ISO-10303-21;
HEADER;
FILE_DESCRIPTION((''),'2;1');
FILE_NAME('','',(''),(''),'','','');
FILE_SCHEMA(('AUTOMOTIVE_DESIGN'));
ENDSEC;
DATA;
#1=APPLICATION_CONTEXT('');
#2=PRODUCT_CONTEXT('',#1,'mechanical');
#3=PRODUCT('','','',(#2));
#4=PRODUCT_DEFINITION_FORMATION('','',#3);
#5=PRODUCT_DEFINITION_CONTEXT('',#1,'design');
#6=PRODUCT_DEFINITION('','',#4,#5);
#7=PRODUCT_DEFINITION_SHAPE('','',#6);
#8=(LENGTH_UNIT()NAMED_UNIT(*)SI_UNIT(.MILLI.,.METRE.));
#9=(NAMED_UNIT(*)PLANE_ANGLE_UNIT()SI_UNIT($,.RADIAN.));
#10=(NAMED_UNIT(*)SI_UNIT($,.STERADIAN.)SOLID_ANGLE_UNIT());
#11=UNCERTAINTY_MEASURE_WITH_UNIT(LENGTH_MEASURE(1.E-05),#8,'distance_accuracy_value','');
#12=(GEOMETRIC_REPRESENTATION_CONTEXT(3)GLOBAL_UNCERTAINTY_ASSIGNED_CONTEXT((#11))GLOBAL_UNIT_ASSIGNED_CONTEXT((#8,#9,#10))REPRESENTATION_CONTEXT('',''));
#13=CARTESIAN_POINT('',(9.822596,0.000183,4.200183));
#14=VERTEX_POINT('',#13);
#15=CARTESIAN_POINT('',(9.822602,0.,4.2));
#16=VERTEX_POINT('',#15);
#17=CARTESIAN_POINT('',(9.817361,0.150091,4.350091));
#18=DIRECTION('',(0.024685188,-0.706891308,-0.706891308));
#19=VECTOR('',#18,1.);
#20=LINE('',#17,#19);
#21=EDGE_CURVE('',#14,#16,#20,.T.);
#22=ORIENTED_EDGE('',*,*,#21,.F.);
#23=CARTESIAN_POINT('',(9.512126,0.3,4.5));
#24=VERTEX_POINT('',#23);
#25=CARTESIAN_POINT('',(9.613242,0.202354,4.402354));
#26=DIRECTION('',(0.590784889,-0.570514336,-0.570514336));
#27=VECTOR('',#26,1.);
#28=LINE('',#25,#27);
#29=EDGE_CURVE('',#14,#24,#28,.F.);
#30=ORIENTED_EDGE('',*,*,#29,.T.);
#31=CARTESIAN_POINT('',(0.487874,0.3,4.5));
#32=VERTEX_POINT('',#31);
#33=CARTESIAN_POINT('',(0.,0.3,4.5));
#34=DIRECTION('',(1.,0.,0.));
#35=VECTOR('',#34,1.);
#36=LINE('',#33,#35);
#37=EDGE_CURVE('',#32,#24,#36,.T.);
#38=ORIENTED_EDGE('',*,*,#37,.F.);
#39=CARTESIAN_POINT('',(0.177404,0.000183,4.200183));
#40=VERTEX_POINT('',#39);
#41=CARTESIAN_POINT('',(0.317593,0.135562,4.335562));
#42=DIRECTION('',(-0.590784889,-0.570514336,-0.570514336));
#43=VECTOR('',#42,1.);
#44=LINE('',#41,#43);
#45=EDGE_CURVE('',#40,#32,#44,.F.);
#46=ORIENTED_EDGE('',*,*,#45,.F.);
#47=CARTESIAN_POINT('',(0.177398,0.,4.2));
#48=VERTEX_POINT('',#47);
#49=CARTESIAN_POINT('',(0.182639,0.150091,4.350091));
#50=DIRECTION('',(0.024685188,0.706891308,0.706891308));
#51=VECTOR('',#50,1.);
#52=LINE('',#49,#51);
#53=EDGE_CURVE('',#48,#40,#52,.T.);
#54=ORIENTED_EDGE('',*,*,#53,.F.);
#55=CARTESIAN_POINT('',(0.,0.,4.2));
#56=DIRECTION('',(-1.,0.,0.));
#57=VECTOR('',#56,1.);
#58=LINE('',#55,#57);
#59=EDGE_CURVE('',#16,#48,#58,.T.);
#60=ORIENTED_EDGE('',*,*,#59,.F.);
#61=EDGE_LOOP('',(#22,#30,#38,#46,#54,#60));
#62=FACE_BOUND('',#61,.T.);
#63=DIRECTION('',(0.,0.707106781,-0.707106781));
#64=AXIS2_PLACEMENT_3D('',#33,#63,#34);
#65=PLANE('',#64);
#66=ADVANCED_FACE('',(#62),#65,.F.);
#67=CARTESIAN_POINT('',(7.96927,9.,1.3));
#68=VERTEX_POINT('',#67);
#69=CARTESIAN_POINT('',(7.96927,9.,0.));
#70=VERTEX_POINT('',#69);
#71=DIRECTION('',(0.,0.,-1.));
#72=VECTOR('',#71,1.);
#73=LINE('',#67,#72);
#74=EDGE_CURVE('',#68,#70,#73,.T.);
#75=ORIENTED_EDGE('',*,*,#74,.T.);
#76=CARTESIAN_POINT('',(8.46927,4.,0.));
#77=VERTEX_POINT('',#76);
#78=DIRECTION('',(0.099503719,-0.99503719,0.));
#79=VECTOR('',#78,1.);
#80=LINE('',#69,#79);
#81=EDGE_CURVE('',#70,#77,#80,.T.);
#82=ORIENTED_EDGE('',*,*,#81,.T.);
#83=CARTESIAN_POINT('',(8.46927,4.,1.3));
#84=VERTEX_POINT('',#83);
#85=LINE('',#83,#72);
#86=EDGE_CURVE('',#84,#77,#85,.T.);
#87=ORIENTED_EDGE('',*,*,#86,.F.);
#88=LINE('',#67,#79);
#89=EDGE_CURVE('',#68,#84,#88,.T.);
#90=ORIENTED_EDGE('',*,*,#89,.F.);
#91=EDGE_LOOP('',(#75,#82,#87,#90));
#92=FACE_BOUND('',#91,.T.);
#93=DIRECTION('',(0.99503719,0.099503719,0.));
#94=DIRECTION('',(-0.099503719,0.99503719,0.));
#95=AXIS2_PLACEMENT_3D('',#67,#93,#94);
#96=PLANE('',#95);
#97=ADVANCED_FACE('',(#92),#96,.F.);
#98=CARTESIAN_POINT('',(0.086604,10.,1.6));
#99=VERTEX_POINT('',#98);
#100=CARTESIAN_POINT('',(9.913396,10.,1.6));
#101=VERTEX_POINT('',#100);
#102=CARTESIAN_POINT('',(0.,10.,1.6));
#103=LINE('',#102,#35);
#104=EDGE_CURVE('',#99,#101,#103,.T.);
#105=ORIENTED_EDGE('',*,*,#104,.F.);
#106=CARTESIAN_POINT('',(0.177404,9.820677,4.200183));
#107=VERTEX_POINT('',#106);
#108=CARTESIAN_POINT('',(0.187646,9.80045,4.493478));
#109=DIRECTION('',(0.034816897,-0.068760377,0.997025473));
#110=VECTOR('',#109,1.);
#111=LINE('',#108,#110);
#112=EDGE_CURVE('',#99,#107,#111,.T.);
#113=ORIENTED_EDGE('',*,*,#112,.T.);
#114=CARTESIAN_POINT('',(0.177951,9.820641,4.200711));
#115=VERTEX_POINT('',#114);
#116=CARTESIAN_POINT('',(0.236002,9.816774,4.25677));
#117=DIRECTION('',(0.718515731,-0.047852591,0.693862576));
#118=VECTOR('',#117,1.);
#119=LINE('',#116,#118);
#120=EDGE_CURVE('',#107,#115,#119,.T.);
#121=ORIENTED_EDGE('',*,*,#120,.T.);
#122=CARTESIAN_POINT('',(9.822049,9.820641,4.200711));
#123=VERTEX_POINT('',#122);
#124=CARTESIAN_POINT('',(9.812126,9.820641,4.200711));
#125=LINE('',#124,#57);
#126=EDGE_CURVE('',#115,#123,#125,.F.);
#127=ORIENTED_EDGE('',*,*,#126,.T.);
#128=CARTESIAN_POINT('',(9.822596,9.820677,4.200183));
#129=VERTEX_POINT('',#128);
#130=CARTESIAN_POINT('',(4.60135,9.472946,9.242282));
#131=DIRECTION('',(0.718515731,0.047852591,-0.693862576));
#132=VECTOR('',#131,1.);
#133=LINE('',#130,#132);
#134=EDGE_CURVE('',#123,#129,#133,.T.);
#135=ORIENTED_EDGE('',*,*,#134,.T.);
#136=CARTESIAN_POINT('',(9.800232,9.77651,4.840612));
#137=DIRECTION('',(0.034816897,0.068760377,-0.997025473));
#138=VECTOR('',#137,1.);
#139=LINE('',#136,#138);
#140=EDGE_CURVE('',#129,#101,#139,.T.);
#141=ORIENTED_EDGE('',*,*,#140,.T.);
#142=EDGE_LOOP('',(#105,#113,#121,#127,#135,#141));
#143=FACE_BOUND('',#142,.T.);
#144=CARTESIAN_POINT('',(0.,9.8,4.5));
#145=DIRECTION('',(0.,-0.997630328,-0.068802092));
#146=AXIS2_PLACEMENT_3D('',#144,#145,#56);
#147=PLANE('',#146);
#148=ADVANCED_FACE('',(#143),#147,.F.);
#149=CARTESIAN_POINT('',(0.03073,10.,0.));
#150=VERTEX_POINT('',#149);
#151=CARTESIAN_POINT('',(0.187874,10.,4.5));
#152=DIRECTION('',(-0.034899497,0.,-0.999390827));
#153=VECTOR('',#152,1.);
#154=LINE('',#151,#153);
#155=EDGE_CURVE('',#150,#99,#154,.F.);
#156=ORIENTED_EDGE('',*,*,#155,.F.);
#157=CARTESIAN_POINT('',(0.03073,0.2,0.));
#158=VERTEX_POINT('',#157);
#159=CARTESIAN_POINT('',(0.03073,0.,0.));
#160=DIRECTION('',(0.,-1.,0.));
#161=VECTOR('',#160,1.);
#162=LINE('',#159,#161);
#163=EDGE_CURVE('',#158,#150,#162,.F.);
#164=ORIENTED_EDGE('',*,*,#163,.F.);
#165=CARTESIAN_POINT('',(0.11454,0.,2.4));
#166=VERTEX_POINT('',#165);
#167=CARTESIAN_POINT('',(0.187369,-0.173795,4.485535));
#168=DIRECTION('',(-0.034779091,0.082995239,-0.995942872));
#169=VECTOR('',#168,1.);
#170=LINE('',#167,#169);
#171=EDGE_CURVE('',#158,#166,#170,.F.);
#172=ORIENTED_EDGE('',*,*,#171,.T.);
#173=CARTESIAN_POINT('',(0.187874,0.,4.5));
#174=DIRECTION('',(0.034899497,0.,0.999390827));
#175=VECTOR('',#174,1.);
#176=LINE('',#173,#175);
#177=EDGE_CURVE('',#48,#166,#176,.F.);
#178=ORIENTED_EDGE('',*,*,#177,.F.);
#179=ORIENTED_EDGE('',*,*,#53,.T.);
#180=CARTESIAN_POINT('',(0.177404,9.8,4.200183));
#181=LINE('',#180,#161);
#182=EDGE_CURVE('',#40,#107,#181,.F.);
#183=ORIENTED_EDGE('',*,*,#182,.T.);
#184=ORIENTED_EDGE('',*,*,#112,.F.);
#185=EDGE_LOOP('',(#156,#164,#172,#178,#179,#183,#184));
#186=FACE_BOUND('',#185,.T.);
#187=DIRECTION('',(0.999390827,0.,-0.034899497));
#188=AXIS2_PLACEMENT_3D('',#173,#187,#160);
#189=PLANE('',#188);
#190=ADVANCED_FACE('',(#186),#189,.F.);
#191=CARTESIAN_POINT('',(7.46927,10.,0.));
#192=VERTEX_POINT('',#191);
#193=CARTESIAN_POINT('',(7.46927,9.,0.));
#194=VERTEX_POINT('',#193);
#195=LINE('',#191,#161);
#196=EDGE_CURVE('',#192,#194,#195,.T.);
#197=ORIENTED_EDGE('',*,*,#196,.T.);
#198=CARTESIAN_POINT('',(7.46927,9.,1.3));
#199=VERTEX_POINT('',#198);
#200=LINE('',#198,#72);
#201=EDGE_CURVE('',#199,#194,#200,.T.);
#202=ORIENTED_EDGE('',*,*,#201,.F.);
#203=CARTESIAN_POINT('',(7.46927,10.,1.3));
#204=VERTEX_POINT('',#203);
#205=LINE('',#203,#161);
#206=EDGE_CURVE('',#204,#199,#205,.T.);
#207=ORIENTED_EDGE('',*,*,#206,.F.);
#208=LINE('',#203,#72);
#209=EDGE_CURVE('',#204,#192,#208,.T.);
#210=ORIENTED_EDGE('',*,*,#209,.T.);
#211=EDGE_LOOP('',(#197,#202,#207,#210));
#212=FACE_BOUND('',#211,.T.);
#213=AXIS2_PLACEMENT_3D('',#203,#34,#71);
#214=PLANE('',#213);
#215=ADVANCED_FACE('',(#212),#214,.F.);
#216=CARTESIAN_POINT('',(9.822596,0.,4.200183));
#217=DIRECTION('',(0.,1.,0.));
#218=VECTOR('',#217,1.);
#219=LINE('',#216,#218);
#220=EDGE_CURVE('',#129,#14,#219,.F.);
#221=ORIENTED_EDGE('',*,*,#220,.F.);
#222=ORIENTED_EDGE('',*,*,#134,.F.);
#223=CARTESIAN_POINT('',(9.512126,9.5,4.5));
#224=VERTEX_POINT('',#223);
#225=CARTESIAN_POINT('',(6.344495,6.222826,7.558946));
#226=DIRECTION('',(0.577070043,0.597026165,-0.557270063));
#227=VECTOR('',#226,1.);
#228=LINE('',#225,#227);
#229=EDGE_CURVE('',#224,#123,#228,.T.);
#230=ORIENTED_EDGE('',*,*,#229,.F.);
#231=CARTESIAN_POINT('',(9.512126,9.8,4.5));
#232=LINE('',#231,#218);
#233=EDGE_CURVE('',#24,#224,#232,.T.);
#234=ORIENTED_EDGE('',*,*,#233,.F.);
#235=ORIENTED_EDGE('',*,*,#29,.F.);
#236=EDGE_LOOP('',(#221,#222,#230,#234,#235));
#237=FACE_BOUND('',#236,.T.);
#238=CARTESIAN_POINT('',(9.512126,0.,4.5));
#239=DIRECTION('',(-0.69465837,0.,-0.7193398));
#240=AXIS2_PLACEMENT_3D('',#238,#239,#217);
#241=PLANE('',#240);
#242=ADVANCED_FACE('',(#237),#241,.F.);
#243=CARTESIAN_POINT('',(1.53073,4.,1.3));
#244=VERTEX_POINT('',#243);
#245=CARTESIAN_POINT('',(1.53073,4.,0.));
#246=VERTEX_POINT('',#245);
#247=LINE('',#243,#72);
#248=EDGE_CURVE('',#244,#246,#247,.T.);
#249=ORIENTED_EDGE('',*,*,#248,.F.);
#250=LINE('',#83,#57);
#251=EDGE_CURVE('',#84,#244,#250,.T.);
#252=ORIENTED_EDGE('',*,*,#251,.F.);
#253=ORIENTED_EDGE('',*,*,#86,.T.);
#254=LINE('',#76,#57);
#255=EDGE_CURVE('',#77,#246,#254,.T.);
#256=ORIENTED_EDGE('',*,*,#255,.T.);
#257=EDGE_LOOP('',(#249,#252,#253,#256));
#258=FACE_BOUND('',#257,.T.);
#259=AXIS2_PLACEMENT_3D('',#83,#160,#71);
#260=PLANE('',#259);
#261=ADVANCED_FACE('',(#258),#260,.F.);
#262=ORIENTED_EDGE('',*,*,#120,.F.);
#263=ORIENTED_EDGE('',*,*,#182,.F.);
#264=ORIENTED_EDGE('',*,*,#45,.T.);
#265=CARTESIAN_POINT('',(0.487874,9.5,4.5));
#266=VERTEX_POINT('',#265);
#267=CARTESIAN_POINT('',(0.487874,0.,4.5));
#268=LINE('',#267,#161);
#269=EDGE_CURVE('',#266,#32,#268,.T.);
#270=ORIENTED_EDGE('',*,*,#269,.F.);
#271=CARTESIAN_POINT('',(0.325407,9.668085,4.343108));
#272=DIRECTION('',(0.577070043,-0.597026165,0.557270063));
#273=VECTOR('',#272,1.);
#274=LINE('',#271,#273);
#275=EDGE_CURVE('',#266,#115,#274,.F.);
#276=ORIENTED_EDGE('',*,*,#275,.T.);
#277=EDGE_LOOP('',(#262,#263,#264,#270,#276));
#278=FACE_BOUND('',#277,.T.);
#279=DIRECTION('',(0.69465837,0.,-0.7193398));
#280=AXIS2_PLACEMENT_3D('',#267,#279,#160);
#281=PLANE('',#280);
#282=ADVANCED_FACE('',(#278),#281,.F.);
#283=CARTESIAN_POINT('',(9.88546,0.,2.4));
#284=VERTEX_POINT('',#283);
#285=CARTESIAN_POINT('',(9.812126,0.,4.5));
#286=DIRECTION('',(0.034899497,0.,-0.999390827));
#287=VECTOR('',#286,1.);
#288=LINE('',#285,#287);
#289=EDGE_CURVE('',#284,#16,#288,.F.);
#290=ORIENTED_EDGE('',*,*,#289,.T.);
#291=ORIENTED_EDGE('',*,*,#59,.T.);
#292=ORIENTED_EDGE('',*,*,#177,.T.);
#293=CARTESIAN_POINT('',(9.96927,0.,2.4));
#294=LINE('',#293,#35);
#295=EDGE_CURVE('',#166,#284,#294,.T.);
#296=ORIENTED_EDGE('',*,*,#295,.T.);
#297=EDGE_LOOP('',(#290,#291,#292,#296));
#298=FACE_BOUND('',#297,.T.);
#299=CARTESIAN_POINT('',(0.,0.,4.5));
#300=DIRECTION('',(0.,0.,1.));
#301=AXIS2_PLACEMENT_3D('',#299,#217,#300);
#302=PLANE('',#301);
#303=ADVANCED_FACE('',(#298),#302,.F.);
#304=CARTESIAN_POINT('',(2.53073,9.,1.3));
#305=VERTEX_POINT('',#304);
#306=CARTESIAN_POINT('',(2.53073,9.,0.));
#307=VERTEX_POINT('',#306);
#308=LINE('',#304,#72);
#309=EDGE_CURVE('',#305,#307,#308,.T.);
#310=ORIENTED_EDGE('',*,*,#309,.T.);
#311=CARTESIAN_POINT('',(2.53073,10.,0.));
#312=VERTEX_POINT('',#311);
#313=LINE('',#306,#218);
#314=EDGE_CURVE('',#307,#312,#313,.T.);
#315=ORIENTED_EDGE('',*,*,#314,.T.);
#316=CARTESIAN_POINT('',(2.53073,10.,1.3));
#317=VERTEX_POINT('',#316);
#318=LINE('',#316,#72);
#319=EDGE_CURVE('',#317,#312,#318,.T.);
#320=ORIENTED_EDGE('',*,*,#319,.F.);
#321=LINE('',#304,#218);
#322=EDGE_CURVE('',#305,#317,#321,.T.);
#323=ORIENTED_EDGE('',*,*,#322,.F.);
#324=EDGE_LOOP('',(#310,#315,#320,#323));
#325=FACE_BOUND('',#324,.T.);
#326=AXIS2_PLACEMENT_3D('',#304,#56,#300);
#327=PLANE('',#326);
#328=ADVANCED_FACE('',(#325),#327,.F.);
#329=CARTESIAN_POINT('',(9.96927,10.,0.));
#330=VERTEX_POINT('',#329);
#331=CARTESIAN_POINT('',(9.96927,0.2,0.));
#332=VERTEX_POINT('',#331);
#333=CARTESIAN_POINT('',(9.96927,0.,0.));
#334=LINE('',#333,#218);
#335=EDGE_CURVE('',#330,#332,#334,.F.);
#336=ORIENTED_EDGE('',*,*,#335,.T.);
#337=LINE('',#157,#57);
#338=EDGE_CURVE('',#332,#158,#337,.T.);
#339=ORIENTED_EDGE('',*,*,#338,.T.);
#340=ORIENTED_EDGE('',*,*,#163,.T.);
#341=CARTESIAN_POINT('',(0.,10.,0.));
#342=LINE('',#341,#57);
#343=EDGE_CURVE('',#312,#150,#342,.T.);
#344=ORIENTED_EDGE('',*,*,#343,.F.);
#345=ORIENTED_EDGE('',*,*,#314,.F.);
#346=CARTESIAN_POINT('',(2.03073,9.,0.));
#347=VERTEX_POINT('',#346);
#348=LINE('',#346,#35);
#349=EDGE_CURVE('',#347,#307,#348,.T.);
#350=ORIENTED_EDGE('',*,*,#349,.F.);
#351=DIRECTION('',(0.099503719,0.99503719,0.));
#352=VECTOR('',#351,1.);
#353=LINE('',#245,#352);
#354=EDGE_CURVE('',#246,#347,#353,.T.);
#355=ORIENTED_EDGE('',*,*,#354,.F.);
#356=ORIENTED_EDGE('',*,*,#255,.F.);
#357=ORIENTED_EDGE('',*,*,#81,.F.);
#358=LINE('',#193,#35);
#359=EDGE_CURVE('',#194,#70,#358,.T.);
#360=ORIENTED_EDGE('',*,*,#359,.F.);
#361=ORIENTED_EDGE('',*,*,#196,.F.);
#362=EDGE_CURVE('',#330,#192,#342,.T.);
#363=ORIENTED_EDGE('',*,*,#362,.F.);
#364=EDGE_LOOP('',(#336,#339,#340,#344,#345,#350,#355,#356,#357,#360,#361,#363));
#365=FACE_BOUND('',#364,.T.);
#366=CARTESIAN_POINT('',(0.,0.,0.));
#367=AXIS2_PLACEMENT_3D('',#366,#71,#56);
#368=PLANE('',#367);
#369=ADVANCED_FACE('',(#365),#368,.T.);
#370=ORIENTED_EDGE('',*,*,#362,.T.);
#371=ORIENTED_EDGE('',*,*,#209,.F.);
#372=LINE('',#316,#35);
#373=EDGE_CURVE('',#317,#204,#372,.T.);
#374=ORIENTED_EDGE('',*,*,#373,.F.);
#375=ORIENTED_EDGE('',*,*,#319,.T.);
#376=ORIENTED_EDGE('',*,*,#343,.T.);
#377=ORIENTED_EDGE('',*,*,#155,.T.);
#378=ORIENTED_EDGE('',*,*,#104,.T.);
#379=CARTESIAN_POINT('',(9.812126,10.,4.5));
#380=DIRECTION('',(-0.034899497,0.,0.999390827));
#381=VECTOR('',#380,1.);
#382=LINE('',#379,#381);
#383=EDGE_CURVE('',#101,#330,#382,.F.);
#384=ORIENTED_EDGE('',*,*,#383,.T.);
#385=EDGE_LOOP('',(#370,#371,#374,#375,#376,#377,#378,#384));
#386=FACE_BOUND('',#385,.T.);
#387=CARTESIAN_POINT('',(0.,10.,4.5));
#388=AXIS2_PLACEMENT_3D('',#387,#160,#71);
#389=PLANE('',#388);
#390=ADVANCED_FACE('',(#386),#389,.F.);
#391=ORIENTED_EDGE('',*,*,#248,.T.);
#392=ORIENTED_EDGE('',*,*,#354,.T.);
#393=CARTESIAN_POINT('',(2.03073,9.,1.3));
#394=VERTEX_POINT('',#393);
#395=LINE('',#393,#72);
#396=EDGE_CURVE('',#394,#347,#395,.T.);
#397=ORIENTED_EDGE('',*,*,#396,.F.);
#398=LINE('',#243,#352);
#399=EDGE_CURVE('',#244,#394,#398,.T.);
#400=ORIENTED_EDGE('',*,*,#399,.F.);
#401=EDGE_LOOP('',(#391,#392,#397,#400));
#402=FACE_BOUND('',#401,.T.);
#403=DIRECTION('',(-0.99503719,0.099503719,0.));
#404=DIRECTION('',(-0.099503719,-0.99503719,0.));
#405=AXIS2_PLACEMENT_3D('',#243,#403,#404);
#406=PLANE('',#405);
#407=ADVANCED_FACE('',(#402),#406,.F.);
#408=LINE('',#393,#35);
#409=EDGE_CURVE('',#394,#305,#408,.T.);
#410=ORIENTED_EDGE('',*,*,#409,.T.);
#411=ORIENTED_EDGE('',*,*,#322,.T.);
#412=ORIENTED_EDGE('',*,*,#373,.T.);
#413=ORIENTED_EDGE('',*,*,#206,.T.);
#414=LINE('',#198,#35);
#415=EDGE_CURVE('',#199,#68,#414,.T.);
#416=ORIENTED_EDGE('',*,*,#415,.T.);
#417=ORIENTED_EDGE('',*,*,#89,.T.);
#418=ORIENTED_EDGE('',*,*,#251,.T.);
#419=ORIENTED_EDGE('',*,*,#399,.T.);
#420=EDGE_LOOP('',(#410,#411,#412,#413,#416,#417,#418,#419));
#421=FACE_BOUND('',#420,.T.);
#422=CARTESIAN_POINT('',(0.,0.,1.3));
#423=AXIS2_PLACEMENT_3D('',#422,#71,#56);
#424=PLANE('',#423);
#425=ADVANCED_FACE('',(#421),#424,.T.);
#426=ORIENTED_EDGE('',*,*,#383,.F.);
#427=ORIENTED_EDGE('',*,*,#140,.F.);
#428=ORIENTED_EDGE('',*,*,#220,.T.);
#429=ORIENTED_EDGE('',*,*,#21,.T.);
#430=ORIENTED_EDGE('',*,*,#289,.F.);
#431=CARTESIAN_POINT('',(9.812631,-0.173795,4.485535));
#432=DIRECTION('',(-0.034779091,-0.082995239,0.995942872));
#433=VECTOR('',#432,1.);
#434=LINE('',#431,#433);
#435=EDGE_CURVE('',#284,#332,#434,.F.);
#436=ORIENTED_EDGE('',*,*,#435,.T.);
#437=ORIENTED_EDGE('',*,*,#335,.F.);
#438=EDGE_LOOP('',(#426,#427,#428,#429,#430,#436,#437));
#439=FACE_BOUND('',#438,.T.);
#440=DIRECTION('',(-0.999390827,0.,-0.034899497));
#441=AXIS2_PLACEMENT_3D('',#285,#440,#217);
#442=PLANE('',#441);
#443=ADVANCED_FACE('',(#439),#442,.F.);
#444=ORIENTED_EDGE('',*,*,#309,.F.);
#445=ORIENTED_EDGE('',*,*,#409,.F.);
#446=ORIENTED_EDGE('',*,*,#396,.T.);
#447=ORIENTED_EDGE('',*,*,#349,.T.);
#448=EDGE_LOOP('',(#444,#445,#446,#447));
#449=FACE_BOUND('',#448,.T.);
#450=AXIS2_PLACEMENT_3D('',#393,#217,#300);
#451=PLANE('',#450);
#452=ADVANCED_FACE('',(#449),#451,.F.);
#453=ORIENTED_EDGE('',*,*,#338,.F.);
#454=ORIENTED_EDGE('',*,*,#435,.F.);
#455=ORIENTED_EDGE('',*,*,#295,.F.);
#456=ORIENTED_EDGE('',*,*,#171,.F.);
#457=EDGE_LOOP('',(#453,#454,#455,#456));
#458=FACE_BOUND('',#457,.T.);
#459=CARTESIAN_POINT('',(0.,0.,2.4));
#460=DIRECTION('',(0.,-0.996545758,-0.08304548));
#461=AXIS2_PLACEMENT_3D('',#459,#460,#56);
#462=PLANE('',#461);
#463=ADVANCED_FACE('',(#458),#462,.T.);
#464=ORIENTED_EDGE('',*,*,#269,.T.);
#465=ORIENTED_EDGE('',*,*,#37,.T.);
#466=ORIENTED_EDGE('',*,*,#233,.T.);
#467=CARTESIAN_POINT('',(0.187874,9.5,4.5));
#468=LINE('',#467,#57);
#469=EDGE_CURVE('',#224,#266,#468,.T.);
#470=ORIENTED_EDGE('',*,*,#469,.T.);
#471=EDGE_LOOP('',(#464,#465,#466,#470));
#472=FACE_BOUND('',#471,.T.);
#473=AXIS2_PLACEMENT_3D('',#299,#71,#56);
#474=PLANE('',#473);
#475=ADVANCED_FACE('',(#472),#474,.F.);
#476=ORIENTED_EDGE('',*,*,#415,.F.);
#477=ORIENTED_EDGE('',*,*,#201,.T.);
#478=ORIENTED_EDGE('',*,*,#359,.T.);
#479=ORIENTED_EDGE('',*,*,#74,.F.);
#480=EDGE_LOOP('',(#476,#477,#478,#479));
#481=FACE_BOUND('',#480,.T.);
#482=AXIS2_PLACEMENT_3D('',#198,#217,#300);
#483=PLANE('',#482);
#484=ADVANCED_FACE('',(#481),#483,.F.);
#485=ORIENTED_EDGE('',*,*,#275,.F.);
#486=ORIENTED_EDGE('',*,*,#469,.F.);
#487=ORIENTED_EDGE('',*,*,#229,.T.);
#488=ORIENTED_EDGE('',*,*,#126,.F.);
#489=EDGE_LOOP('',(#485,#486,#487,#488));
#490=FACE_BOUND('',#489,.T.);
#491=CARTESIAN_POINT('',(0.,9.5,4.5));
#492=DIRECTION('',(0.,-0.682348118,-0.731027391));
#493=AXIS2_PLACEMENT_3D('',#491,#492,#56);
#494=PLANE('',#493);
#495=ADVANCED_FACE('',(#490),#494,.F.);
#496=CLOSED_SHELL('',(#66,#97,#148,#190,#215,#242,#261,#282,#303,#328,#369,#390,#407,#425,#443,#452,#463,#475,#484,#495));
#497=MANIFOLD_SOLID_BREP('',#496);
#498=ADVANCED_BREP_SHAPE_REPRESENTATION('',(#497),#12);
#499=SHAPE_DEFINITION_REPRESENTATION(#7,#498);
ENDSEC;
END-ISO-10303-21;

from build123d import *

# Parameters (mm, degrees)
SKETCH1_W           = 10
SKETCH1_H           = 10
BOSS_EXTRUDE1_DEPTH = 4.5
CHAMFER1_SIZE       = 2.9
CHAMFER1_SIZE2      = 0.2
CHAMFER3_SIZE       = 0.18787374
CHAMFER3_SIZE_2     = 5.38
CHAMFER4_SIZE       = 0.3
CUT_EXTRUDE1_DEPTH  = 1.3
CHAMFER5_SIZE       = 0.2
CHAMFER5_SIZE2      = 2.4


with BuildPart() as part:
    # Sketch1 → Boss-Extrude1 (new body)
    with BuildSketch(Plane.XY):
        with Locations((5, 5)):
            Rectangle(SKETCH1_W, SKETCH1_H)
    extrude(amount=BOSS_EXTRUDE1_DEPTH)

    # Chamfer1
    chamfer1_edges = [part.edges().sort_by_distance(p)[0] for p in [
        (5, 10, 4.5),
    ]]
    chamfer1_side = [part.faces().sort_by_distance(p)[0] for p in [
        (5, 10, 2.25),
    ]]
    chamfer(chamfer1_edges, length=CHAMFER1_SIZE, length2=CHAMFER1_SIZE2, reference=chamfer1_side[0])

    # Chamfer3
    # the kernel refuses this chamfer: 5.38, 0.18787374 mm, written as the material it takes off along each edge
    with BuildSketch(Plane(origin=(0, 23.787684867, 4.5), x_dir=(0.6724220033128364, 0, 0.7401679873250072), z_dir=(0, -1, 0))) as chamfer3_piece_1:
        Polygon((CHAMFER3_SIZE * 0.672422002832, -CHAMFER3_SIZE * 0.740167986796), (-CHAMFER3_SIZE_2 * 0.740167987325, -CHAMFER3_SIZE_2 * 0.672422003313), (0, 0), align=None)
    extrude(amount=37.775369733, mode=Mode.SUBTRACT)
    with BuildSketch(Plane(origin=(10, -13.987684867, 4.5), x_dir=(0.0013423185755924109, 0, -0.999999099090015), z_dir=(0, 1, 0))) as chamfer3_piece_2:
        Polygon((CHAMFER3_SIZE_2 * 0.99999909909, CHAMFER3_SIZE_2 * 0.00134231857559), (-CHAMFER3_SIZE * 0.00134231857463, CHAMFER3_SIZE * 0.999999098375), (0, 0), align=None)
    extrude(amount=37.775369733, mode=Mode.SUBTRACT)

    # Chamfer4
    chamfer4_edges = [part.edges().sort_by_distance(p)[0] for p in [
        (5, 9.8, 4.5),
        (5, 0, 4.5),
        (9.81212626, 4.9, 4.5),
        (0.18787374, 4.9, 4.5),
    ]]
    chamfer(chamfer4_edges, length=CHAMFER4_SIZE)

    # Sketch2 → Cut-Extrude1 (cut)
    with BuildSketch(Plane(origin=(0, 0, 0), x_dir=(-1, 0, 0), z_dir=(0, 0, -1))):
        Polygon((-7.469269723, 10), (-7.469269723, 9), (-7.969269723, 9), (-8.469269723, 4), (-1.530730277, 4), (-2.030730277, 9), (-2.530730277, 9), (-2.530730277, 10), align=None)
    extrude(amount=-CUT_EXTRUDE1_DEPTH, mode=Mode.SUBTRACT)

    # Chamfer5
    chamfer5_edges = [part.edges().sort_by_distance(p)[0] for p in [
        (5, 0, 0),
    ]]
    chamfer5_side = [part.faces().sort_by_distance(p)[0] for p in [
        (5, 3.900810123, 0),
    ]]
    chamfer(chamfer5_edges, length=CHAMFER5_SIZE, length2=CHAMFER5_SIZE2, reference=chamfer5_side[0])


solid = part.part
